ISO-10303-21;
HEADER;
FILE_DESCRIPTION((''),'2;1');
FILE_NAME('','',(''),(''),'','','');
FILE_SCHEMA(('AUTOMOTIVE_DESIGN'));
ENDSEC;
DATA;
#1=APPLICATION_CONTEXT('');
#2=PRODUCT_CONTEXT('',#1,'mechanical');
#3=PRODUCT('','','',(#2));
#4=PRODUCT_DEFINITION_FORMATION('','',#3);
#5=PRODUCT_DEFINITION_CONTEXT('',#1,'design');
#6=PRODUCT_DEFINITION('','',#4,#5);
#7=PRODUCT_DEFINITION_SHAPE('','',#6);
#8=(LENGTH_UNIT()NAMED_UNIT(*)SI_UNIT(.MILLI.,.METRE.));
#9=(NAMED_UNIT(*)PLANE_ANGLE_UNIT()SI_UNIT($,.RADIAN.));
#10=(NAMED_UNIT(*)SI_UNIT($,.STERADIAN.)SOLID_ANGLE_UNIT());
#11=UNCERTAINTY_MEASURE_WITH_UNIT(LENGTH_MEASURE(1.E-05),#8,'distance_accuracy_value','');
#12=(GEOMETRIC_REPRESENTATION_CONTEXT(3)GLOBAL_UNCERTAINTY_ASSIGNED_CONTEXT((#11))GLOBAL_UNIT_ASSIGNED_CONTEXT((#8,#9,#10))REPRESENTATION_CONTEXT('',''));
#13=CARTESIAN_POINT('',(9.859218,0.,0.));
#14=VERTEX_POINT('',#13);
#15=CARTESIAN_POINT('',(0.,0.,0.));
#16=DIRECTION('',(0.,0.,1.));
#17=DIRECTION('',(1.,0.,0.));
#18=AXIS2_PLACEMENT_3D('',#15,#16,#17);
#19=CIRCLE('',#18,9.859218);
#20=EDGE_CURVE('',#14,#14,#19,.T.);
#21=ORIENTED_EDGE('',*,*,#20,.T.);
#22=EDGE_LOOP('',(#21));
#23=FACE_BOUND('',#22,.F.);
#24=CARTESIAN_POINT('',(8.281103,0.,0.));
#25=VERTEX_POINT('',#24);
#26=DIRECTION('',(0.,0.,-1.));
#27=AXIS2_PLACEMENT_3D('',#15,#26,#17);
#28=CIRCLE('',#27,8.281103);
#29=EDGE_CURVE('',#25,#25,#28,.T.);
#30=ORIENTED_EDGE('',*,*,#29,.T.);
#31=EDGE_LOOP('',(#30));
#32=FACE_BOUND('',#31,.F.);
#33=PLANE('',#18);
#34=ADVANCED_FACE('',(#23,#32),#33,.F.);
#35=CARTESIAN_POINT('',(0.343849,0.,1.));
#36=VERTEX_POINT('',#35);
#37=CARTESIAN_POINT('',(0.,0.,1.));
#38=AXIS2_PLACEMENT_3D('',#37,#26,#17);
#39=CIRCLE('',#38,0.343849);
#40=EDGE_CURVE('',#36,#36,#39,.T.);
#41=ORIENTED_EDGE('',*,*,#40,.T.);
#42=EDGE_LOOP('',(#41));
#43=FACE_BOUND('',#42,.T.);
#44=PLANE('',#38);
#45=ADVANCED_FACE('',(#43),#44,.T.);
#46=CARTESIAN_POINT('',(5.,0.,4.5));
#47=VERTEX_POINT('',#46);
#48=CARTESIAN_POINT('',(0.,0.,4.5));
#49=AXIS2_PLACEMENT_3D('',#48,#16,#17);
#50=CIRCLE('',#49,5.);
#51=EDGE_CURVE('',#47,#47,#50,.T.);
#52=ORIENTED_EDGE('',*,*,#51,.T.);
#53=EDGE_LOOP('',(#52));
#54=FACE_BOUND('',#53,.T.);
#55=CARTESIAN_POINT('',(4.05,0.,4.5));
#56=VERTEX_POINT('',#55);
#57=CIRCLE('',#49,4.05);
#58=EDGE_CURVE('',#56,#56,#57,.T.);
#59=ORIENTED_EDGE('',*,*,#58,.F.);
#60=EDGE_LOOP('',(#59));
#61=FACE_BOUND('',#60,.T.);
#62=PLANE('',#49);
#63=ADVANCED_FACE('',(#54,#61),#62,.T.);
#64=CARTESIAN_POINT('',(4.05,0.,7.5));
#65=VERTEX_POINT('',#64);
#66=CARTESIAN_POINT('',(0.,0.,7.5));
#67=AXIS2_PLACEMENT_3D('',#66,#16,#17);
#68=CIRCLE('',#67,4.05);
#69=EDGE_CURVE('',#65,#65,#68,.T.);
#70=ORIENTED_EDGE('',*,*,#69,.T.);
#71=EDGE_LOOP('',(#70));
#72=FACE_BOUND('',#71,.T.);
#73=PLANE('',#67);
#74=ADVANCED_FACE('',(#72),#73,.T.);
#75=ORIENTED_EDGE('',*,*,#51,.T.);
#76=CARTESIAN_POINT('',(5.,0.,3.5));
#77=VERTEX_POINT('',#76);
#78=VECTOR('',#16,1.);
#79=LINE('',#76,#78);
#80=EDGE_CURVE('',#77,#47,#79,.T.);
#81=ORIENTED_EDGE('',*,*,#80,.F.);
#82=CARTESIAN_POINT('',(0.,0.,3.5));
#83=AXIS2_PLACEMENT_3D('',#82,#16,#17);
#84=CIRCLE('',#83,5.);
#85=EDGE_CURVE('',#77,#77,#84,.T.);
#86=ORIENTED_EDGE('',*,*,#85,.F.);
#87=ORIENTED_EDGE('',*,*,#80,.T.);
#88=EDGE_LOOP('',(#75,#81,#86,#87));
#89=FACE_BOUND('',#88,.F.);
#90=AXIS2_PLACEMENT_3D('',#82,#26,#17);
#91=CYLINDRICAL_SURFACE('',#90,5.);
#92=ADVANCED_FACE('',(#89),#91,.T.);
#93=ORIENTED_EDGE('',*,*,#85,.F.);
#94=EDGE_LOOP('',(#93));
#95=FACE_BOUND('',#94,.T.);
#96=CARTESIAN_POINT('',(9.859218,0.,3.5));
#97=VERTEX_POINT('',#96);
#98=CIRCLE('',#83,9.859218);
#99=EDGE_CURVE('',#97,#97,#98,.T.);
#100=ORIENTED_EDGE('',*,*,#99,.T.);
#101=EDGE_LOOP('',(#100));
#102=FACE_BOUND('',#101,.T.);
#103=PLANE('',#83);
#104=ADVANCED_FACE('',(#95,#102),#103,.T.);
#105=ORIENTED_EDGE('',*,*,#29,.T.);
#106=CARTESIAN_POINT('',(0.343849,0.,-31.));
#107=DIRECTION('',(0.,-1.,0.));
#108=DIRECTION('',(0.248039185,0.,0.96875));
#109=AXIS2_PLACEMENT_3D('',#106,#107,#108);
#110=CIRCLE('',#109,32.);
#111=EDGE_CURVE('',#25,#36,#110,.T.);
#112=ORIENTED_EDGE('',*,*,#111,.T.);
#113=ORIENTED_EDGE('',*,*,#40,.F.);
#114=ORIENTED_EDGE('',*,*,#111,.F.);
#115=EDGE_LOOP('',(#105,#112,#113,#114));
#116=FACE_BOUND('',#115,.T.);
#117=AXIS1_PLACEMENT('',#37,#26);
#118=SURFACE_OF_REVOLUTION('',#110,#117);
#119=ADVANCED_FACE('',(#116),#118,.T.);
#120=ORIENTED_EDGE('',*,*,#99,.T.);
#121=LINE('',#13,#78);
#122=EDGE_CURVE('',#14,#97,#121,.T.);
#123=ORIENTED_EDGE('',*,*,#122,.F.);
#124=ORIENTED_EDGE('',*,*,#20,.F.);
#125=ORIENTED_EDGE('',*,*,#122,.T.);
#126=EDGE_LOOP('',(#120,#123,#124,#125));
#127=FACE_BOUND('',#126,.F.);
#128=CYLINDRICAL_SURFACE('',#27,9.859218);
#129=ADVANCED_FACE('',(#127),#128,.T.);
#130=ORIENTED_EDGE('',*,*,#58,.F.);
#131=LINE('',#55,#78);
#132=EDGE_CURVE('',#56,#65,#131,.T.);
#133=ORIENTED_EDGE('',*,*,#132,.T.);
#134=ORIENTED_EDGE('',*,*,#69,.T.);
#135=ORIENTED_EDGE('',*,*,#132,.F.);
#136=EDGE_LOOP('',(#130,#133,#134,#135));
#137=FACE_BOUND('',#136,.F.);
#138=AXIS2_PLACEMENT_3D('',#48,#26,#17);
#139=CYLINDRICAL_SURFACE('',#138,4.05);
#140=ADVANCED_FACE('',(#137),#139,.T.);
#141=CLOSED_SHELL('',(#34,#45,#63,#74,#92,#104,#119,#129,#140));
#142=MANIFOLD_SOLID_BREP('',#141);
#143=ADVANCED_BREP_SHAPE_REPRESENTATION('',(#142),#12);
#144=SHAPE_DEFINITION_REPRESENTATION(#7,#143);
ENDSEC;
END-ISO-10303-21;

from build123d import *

# Parameters (mm, degrees)
F0_R     = 9.8592181747
F1_DEPTH = 3.5
F2_R     = 5
F3_DEPTH = 1
F4_R     = 4.05
F5_DEPTH = 3
F6_R     = 8.2811029309
F7_DEPTH = 1


# Not quite as in the source:
# - a fillet or chamfer that OpenCascade refuses, or shapes differently, is made with other operations: its cross-section is extruded or revolved along the edge and cut away or added


with BuildPart() as f1:
    # F0 (on Top) → F1 (new body)
    with BuildSketch(Plane.XY):
        Circle(F0_R)
    extrude(amount=F1_DEPTH)

    # F2 (on face) → F3 (join)
    with BuildSketch(Plane.XY.offset(3.5)):
        Circle(F2_R)
    extrude(amount=F3_DEPTH)

    # F4 (on face) → F5 (join)
    with BuildSketch(Plane.XY.offset(4.5)):
        Circle(F4_R)
    extrude(amount=F5_DEPTH)

    # F6 (on face) → F7 (cut)
    with BuildSketch(Plane(origin=(0, 0, 0), x_dir=(1, 0, 0), z_dir=(0, 0, -1))):
        Circle(F6_R)
    extrude(amount=-F7_DEPTH, mode=Mode.SUBTRACT)

    # F8: fillet of radius 32 on 1 edges, made by hand

    # F8_s1 → F8_t2 (revolve)
    with BuildSketch(Plane.XZ):
        with BuildLine():
            ThreePointArc((8.2811029309, 0), (4.3438489977, 0.7490157328), (0.3438489977, 1))
            Line((0.3438489977, 1), (8.2811029309, 1))
            Line((8.2811029309, 1), (8.2811029309, 0))
        make_face()
    revolve(axis=Axis((0, 0, 1), (0, 0, -1)))


solid = f1.part
